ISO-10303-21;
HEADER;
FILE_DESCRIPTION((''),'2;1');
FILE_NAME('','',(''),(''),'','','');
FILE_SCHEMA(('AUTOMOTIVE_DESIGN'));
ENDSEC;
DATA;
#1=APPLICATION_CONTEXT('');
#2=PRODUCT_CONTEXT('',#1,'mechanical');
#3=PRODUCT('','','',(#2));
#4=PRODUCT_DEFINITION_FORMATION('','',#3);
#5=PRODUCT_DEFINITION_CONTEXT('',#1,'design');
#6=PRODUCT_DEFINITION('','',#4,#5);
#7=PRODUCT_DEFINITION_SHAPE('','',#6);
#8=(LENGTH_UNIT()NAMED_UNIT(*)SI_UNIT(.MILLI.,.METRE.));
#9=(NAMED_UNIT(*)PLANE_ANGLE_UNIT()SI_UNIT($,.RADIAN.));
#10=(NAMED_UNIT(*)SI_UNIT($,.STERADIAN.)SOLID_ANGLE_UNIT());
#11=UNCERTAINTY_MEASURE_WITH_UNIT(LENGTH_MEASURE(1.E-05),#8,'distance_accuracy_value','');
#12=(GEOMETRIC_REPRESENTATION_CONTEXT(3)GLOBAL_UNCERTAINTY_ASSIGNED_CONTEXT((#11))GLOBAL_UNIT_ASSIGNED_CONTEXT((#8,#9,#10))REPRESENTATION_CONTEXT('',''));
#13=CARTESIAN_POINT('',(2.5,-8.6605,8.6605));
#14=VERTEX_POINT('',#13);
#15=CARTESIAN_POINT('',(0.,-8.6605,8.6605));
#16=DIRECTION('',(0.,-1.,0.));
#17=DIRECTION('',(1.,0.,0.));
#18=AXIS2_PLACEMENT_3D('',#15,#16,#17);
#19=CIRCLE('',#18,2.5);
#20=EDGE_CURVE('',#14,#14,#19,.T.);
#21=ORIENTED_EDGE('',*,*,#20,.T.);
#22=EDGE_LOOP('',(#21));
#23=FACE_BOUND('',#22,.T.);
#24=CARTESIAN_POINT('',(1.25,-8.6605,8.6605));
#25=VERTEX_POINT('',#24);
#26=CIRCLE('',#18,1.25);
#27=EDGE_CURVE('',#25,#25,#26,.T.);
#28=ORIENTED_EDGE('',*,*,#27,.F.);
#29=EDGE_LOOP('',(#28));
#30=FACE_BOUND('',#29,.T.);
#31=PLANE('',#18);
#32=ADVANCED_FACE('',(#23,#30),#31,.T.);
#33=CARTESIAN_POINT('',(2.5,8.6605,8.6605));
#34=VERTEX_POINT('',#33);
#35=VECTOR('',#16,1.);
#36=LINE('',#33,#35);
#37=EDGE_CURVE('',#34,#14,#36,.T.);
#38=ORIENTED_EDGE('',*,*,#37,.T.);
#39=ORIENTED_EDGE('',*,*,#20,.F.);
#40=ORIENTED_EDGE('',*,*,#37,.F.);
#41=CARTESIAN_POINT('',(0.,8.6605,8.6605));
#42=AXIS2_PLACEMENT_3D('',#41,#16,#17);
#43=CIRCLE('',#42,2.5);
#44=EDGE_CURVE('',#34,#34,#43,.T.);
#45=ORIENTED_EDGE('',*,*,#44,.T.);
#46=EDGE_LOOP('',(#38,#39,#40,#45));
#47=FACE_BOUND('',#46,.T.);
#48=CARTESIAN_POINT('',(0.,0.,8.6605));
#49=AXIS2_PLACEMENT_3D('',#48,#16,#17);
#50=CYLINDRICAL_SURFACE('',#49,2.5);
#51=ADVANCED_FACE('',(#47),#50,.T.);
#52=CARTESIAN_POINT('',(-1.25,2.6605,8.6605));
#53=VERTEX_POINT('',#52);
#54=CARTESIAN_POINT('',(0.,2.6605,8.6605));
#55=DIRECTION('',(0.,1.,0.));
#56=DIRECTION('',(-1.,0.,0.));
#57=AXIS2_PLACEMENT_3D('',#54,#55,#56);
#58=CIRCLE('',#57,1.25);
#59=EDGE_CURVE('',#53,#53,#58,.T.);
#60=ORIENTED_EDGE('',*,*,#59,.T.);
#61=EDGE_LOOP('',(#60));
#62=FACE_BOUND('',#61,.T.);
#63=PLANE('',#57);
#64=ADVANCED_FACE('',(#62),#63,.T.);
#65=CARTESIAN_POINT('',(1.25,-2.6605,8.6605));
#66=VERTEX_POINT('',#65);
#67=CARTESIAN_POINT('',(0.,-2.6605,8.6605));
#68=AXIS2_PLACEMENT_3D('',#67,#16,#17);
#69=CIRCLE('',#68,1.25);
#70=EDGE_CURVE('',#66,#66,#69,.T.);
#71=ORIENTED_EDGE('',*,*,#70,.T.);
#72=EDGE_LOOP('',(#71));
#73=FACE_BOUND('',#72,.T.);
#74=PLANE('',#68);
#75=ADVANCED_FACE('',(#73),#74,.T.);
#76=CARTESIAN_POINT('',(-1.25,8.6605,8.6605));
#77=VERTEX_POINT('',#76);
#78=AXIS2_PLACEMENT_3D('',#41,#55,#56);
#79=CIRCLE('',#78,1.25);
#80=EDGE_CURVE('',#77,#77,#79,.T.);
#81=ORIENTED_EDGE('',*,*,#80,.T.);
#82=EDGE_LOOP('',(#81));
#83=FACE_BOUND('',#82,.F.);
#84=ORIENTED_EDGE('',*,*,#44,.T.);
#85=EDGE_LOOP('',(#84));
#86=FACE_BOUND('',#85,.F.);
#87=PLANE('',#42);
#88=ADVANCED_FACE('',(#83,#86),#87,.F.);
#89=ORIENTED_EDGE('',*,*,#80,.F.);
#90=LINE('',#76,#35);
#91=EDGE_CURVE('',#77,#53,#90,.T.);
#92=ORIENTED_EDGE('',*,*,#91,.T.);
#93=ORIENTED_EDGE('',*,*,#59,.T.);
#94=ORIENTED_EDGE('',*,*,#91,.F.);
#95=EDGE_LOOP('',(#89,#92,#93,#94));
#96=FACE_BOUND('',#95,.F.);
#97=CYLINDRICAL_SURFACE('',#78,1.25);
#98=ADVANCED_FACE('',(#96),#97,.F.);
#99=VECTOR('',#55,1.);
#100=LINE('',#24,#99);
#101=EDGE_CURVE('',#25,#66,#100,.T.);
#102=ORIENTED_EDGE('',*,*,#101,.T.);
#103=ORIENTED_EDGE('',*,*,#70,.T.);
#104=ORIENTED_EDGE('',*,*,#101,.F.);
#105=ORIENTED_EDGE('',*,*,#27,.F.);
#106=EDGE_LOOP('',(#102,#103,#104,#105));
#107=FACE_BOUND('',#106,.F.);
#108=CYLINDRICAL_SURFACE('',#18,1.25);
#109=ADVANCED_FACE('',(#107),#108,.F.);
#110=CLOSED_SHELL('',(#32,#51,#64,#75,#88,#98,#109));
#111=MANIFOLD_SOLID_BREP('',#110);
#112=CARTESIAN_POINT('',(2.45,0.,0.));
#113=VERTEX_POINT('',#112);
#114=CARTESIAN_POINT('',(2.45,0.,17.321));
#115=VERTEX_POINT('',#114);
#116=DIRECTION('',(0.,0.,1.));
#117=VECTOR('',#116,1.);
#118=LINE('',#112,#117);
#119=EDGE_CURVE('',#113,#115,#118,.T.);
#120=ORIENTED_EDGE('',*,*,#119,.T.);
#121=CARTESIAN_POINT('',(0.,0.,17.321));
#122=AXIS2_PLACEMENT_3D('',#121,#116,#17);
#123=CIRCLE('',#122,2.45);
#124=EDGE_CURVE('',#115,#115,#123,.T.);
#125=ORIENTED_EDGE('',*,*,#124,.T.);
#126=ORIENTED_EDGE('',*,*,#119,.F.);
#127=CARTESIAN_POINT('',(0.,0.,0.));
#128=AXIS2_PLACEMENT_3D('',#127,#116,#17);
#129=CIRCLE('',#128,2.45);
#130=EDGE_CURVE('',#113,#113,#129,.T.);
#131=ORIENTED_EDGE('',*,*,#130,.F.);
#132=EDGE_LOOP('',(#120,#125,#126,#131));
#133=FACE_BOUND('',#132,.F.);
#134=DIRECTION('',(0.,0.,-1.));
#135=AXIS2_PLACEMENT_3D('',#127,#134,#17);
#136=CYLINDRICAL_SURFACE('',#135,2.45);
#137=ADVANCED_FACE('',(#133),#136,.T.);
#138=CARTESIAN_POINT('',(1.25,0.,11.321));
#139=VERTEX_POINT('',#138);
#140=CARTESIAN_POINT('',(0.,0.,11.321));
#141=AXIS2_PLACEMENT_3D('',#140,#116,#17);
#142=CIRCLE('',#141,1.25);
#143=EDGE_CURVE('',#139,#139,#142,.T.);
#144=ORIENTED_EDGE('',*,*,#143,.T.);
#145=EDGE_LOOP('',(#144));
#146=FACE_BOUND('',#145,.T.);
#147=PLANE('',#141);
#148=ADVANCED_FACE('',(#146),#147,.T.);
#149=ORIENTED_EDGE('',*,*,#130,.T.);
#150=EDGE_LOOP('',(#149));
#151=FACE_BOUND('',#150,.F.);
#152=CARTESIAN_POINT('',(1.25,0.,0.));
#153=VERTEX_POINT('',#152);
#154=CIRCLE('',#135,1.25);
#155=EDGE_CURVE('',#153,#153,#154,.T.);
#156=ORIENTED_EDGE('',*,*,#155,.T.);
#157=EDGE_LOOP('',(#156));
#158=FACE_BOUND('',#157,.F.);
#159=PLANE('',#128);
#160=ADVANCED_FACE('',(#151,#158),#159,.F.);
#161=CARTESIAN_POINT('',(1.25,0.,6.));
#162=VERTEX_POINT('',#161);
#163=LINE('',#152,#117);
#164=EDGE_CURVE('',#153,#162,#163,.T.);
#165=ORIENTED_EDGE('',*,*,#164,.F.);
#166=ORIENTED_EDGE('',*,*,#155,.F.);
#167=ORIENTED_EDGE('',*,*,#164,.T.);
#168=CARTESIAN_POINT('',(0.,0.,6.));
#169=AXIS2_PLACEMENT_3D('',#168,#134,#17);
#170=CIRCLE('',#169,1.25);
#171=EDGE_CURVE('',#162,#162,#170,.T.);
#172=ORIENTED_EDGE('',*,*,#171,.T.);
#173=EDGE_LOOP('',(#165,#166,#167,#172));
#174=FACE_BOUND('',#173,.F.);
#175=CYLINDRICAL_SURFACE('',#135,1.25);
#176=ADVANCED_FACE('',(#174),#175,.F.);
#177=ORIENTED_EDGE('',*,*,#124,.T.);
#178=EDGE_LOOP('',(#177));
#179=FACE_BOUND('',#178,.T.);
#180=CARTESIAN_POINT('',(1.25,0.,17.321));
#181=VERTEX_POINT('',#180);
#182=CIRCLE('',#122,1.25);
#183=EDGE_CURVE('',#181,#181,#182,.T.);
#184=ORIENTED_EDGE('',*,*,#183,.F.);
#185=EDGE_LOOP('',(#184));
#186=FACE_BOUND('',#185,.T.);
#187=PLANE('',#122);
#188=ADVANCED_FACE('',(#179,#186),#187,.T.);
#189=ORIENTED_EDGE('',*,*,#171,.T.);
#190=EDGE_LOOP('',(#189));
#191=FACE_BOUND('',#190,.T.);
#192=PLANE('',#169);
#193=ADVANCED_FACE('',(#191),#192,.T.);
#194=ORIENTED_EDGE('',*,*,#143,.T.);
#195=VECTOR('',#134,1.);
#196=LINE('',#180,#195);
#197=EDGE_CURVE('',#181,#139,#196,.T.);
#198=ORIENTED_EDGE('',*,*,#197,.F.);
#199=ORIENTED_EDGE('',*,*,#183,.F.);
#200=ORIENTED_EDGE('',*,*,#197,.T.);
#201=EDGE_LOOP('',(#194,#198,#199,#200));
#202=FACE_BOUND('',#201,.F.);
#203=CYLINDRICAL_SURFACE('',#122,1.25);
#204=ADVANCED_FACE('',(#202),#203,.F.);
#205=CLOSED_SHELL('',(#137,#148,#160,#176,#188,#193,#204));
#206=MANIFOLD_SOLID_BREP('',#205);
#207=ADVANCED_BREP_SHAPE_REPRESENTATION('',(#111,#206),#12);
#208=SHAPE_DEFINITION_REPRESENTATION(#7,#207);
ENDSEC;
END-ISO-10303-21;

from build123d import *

# Parameters (mm, degrees)
F0_R          = 2.45
F1_DEPTH      = 17.321
F2_R          = 1.25
F3_DEPTH      = 6
F4_R          = 2.5
F5_DEPTH      = 8.6605
F5_DEPTH_BACK = 8.6605
F6_R          = 1.25
F7_DEPTH      = 6
F8_R          = 1.25
F9_DEPTH      = 6
F10_R         = 1.25
F11_DEPTH     = 6


# Not quite as in the source:
# - a feature names something its author has since deleted; it is built from what else it names


with BuildPart() as f1:
    # F0 (on Top) → F1 (new body)
    with BuildSketch(Plane.XY):
        Circle(F0_R)
    extrude(amount=F1_DEPTH)

    # F2 (on face) → F3 (cut)
    with BuildSketch(Plane.XY.offset(17.321)):
        Circle(F2_R)
    extrude(amount=-F3_DEPTH, mode=Mode.SUBTRACT)

    # F6 (on face) → F7 (cut)
    with BuildSketch(Plane(origin=(0, 0, 0), x_dir=(1, 0, 0), z_dir=(0, 0, -1))):
        Circle(F6_R)
    extrude(amount=-F7_DEPTH, mode=Mode.SUBTRACT)


with BuildPart() as f5:
    # F4 (on Front) → F5 (new body, two sides)
    with BuildSketch(Plane.XZ) as f5_sk:
        with Locations((0, 8.6605)):
            Circle(F4_R)
    extrude(amount=F5_DEPTH)
    extrude(f5_sk.sketch, amount=-F5_DEPTH_BACK)

    # F8 (on face) → F9 (cut)
    with BuildSketch(Plane.XZ.offset(8.6605)):
        with Locations((0, 8.6605)):
            Circle(F8_R)
    extrude(amount=-F9_DEPTH, mode=Mode.SUBTRACT)

    # F10 (on face) → F11 (cut)
    with BuildSketch(Plane(origin=(0, 8.6605, 0), x_dir=(-1, 0, 0), z_dir=(0, 1, 0))):
        with Locations((0, 8.6605)):
            Circle(F10_R)
    extrude(amount=-F11_DEPTH, mode=Mode.SUBTRACT)


solid = Compound([f1.part, f5.part])
